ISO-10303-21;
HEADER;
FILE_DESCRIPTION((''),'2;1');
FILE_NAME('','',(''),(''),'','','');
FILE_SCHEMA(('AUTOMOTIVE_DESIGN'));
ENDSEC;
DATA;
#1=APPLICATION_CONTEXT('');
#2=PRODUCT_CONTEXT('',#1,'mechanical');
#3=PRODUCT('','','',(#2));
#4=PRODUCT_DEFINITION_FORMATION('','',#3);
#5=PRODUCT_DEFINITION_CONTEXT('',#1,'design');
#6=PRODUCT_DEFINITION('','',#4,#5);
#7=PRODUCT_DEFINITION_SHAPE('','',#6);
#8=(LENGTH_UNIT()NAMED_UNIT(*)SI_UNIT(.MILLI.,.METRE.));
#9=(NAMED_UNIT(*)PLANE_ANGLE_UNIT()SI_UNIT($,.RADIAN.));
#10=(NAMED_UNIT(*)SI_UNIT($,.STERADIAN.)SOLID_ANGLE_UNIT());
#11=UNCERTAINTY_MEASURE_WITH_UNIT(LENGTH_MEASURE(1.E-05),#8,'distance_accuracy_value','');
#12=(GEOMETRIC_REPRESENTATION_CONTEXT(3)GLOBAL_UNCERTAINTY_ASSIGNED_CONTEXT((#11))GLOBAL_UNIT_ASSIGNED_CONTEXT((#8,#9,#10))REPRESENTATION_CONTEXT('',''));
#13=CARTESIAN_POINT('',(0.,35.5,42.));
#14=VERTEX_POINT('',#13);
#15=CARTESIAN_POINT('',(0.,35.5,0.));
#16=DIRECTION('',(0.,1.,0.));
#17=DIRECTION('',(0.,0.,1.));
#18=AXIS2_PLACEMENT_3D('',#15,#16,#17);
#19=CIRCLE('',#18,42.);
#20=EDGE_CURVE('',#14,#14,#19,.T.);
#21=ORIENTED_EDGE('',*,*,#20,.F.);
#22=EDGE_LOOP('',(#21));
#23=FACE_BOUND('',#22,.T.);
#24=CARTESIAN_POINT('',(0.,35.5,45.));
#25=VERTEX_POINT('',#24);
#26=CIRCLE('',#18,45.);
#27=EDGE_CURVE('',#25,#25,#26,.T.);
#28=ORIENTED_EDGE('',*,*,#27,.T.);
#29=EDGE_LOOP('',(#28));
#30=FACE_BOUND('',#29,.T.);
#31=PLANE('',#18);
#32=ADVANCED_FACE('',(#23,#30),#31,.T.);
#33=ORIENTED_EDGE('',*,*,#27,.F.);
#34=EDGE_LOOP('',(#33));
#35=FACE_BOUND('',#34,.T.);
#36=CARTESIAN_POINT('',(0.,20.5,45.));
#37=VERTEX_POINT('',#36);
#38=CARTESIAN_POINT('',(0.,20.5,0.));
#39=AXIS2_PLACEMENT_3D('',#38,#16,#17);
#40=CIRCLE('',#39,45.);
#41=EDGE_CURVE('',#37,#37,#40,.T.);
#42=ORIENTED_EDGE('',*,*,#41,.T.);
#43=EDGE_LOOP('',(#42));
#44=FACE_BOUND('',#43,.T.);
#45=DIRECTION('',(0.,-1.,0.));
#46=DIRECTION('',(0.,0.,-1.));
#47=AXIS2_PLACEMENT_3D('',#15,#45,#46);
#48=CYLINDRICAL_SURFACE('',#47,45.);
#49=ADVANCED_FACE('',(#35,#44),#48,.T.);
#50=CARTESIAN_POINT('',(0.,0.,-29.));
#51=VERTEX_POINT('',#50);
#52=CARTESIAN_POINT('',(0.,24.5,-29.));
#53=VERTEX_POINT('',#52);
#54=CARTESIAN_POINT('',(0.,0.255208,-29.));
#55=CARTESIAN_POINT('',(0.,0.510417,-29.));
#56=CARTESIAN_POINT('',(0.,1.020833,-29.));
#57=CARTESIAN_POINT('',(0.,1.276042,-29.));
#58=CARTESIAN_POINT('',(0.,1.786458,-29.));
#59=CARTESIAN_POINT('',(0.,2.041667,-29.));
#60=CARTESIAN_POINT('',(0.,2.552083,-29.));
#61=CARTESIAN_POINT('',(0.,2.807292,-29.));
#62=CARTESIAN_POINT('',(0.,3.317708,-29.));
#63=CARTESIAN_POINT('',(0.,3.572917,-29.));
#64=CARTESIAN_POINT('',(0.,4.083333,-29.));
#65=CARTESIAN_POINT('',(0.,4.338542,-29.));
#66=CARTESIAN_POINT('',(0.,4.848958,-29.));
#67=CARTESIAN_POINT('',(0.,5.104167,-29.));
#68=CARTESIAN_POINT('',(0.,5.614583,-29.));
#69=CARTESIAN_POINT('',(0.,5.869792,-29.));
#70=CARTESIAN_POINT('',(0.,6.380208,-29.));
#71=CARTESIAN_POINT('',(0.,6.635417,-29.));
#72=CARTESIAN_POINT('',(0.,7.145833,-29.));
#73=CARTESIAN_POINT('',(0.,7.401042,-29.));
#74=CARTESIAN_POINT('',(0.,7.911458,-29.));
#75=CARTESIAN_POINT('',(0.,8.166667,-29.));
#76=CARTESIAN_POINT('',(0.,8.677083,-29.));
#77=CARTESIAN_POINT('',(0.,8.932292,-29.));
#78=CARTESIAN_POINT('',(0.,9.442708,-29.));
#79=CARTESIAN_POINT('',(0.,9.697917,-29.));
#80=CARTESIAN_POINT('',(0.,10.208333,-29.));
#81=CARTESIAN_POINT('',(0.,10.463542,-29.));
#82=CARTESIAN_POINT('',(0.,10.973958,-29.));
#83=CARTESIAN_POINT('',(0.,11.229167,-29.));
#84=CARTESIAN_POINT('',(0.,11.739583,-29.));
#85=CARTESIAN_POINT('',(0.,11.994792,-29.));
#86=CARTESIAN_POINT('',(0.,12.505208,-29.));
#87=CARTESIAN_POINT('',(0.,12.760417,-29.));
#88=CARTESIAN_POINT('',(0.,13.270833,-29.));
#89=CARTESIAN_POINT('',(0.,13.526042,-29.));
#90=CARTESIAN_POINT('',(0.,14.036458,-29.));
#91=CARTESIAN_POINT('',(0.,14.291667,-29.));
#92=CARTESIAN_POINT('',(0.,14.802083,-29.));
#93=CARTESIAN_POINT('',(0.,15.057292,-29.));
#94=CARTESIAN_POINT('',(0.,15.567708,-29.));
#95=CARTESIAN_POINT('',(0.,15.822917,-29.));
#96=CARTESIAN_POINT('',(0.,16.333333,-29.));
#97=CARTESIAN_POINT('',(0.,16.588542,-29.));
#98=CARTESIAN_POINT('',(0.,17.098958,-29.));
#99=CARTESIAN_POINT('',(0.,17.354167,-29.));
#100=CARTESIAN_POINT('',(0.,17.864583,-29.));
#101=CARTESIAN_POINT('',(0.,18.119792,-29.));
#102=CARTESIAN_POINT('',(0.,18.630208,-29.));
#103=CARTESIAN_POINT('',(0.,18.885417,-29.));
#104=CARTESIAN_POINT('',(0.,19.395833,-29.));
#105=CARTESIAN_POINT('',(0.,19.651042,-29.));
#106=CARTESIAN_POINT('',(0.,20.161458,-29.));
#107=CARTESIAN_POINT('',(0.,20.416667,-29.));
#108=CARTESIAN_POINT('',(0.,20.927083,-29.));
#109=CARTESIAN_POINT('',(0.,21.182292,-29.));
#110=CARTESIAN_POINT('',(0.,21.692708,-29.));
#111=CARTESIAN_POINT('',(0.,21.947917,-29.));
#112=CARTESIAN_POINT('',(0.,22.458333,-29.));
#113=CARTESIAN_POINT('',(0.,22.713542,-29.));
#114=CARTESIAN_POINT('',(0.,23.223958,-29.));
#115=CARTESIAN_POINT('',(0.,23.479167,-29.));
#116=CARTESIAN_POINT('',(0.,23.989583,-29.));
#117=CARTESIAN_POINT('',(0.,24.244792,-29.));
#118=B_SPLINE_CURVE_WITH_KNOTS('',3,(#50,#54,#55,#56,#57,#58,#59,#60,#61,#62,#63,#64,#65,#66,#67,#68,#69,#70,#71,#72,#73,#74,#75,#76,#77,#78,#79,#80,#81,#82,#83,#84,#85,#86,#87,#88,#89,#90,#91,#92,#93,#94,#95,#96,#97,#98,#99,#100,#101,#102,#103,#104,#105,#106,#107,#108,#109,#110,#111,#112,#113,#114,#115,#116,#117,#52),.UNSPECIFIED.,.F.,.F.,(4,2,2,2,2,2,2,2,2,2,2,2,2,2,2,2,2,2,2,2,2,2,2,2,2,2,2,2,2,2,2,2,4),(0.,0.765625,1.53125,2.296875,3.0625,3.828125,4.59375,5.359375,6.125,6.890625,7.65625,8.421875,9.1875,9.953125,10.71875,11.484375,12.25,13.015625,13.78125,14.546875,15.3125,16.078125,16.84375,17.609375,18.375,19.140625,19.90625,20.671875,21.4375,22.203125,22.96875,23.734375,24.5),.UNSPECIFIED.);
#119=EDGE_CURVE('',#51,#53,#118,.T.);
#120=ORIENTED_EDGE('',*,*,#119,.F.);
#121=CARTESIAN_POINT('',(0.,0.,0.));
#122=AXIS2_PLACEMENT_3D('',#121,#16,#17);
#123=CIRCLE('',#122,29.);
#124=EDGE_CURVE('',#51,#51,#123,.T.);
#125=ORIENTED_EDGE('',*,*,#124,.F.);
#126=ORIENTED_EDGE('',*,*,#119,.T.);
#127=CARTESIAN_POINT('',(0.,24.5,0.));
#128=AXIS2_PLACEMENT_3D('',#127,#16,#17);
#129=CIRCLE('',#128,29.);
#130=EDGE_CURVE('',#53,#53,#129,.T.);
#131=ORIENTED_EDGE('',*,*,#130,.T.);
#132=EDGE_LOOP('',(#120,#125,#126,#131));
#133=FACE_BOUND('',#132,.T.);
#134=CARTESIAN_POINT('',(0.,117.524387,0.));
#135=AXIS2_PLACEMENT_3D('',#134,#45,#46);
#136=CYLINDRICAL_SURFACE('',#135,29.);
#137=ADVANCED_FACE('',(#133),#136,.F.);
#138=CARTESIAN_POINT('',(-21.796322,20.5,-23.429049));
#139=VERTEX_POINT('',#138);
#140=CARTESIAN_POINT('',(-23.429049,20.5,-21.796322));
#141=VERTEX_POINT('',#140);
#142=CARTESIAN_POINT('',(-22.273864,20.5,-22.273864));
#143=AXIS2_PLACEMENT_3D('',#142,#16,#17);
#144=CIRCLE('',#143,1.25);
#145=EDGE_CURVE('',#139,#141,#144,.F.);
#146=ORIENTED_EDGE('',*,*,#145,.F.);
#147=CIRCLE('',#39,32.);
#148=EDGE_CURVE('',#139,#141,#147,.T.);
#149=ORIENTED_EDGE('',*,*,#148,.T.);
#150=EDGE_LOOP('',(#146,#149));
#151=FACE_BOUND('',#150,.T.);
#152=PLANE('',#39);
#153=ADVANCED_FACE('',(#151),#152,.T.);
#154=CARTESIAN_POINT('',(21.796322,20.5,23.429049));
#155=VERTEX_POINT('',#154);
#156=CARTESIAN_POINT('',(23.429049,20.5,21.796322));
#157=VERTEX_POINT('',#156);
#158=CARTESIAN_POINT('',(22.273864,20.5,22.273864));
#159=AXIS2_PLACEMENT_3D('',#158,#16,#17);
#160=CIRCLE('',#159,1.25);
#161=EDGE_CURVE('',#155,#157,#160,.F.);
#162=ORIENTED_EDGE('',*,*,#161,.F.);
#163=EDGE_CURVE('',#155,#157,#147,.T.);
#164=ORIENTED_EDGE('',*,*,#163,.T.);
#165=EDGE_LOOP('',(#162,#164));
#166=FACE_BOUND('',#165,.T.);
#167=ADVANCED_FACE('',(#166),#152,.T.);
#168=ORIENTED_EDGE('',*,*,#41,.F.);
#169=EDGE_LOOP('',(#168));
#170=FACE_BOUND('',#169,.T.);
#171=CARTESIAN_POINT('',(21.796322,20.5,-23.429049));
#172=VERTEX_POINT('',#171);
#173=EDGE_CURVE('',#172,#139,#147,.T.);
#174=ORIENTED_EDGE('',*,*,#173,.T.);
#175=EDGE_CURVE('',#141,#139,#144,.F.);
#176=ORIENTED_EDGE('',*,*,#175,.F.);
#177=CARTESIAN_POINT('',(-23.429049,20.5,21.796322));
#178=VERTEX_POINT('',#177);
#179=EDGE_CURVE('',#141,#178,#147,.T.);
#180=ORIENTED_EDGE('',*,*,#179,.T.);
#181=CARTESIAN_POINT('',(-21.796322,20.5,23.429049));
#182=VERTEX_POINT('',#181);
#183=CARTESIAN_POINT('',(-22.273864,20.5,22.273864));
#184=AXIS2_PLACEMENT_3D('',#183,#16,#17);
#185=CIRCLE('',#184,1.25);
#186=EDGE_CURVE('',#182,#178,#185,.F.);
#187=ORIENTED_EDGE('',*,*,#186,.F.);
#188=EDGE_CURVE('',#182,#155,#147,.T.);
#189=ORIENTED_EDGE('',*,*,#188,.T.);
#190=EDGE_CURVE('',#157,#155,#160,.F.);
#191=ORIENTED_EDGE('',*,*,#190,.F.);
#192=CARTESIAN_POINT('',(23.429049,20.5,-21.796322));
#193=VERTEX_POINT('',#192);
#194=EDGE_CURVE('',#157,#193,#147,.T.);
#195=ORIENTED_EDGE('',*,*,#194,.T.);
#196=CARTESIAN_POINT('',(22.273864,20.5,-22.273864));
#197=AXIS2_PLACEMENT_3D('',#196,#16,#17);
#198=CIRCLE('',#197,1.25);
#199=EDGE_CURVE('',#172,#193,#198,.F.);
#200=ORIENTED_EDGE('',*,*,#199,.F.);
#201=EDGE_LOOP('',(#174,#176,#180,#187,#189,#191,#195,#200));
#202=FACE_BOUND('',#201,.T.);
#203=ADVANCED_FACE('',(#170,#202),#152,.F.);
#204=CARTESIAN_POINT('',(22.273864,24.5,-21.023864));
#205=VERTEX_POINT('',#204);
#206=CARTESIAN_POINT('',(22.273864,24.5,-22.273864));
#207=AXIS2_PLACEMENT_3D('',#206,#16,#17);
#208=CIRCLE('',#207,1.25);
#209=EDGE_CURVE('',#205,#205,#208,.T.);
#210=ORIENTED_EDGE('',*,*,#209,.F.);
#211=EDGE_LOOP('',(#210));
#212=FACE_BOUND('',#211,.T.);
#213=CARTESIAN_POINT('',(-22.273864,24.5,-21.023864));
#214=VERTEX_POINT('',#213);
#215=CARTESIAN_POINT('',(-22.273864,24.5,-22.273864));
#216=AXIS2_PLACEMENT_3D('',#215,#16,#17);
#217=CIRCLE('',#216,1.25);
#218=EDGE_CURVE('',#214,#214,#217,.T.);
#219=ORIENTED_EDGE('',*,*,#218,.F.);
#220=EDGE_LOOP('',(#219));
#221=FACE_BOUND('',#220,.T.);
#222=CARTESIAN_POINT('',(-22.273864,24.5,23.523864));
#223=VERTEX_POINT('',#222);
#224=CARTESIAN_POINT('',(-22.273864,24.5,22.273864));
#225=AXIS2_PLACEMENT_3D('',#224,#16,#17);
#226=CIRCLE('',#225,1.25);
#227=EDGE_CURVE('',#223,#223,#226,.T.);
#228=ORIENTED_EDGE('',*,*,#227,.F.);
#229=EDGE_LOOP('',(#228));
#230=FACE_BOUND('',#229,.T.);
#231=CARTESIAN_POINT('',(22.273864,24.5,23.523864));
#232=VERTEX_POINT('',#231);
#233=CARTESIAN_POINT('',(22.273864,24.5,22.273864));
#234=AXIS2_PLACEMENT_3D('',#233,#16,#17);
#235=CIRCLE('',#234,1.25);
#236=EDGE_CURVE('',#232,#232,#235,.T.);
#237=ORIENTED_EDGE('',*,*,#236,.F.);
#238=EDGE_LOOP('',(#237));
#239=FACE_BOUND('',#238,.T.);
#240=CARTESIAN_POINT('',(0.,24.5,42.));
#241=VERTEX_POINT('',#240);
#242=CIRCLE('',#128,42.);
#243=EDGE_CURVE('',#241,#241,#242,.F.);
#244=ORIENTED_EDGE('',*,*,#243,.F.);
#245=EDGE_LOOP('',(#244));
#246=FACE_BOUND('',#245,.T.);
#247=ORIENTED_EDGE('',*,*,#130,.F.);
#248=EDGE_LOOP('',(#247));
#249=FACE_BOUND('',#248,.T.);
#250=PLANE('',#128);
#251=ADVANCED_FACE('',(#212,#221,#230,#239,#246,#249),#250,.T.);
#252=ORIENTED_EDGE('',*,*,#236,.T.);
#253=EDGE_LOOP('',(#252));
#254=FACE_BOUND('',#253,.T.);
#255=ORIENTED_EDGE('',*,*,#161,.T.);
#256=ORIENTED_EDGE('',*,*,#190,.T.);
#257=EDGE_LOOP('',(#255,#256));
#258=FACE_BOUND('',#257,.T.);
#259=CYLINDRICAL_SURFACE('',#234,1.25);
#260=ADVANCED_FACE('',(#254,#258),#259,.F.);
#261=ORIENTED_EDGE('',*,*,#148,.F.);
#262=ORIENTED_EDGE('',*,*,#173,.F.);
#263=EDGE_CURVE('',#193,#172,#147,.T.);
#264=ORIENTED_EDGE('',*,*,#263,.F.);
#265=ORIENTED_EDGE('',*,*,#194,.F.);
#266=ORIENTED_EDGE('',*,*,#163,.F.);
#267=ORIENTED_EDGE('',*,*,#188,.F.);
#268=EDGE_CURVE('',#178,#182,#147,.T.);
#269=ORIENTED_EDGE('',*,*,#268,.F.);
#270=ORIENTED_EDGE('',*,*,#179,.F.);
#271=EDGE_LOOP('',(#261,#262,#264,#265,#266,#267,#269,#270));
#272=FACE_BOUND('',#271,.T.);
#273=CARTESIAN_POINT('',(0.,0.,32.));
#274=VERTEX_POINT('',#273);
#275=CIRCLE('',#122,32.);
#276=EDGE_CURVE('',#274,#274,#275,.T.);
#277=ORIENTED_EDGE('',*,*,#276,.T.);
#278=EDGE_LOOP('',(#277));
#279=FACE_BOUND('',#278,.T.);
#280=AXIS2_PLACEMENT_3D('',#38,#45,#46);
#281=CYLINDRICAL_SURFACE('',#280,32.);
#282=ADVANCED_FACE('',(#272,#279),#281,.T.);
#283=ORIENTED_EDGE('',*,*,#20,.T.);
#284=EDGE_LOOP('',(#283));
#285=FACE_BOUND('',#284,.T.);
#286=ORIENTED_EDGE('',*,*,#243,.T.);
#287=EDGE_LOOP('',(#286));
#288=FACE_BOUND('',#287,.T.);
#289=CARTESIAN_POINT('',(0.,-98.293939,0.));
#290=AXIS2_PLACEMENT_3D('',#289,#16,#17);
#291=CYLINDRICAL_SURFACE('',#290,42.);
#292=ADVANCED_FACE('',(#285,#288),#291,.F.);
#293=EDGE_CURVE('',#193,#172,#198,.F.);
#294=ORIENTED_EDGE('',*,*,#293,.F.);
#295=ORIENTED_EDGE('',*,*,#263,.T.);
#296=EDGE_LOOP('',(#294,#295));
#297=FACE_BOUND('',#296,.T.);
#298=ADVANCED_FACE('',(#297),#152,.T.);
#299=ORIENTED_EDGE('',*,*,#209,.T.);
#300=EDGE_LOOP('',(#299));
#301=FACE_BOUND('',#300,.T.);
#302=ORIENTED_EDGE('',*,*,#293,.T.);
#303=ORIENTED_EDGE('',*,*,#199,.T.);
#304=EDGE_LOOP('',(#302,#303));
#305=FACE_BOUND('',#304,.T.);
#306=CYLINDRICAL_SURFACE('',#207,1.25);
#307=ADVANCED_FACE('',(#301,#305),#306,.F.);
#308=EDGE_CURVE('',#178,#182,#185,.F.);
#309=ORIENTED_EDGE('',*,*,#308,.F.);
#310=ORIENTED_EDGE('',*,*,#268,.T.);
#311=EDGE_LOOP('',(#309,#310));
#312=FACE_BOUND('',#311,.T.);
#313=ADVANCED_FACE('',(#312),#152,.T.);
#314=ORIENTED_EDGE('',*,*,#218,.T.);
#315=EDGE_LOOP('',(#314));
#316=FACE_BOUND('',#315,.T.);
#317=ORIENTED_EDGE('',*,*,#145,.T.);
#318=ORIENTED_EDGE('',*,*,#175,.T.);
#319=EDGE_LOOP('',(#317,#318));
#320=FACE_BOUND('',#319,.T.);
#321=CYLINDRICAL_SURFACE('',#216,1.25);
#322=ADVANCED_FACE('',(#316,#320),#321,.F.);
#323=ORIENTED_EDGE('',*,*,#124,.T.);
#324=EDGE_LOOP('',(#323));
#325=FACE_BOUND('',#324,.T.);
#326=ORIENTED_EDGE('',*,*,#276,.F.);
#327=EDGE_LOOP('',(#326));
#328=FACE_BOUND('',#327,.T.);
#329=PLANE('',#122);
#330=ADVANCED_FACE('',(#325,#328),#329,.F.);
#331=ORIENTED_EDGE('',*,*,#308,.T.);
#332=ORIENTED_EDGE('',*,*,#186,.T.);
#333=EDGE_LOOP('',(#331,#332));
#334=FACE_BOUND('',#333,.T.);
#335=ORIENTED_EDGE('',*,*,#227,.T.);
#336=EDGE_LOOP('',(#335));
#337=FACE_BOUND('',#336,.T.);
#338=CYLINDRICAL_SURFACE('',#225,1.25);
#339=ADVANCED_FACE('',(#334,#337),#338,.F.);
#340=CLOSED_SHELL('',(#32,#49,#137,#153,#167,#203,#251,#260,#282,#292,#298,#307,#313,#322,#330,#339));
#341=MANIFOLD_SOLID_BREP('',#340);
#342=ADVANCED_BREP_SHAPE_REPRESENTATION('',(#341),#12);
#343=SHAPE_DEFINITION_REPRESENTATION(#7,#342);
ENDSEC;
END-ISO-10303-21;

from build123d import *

# Parameters (mm, degrees)
SKETCH_1_R                 = 32
EXTRUDE_1_DEPTH            = 20.5
SKETCH_12_R                = 45
EXTRUDE_2_DEPTH            = 15
SKETCH_11_R                = 29
CUT_EXTRUDE_6_DEPTH        = 35.5
SKETCH_13_R                = 42
CUT_EXTRUDE_7_DEPTH        = 11
HOLE_START                 = 20.5
HOLE_WIZARD_M3_1_OUTLINE_R = 1.25
HOLE_WIZARD_M3_1_DEPTH     = 4


# Read off the part's stored shape, not the designer's step: M3 螺纹孔1
with BuildPart() as part:
    # 草图1 → 凸台-拉伸1 (new body)
    with BuildSketch(Plane(origin=(0, 0, 0), x_dir=(1, 0, 0), z_dir=(0, 1, 0))):
        with Locations(Location((0, 0, 0), (0, 0, 270))):
            Circle(SKETCH_1_R)
    extrude(amount=EXTRUDE_1_DEPTH)

    # 草图12 → 凸台-拉伸2 (add)
    with BuildSketch(Plane(origin=(0, 20.5, 0), x_dir=(1, 0, 0), z_dir=(0, 1, 0))):
        with Locations(Location((0, 0, 0), (0, 0, 270))):
            Circle(SKETCH_12_R)
    extrude(amount=EXTRUDE_2_DEPTH)

    # 草图11 → 切除-拉伸6 (cut)
    with BuildSketch(Plane(origin=(0, 0, 0), x_dir=(1, 0, 0), z_dir=(0, 1, 0))):
        with Locations(Location((0, 0, 0), (0, 0, 90))):
            Circle(SKETCH_11_R)
    extrude(amount=CUT_EXTRUDE_6_DEPTH, mode=Mode.SUBTRACT)

    # 草图13 → 切除-拉伸7 (cut)
    with BuildSketch(Plane(origin=(0, 35.5, 0), x_dir=(1, 0, 0), z_dir=(0, 1, 0))):
        with Locations(Location((0, 0, 0), (0, 0, 270))):
            Circle(SKETCH_13_R)
    extrude(amount=-CUT_EXTRUDE_7_DEPTH, mode=Mode.SUBTRACT)

    # M3 螺纹孔1 outline → M3 螺纹孔1 (cut)
    with BuildSketch(Plane(origin=(0, 0, 0), x_dir=(1, 0, 0), z_dir=(0, 1, 0)).offset(HOLE_START)):
        with Locations((-22.273863607, -22.273863607)):
            Circle(HOLE_WIZARD_M3_1_OUTLINE_R)
        with Locations((22.273863607, -22.273863607)):
            Circle(HOLE_WIZARD_M3_1_OUTLINE_R)
        with Locations((22.273863607, 22.273863607)):
            Circle(HOLE_WIZARD_M3_1_OUTLINE_R)
        with Locations((-22.273863607, 22.273863607)):
            Circle(HOLE_WIZARD_M3_1_OUTLINE_R)
    extrude(amount=HOLE_WIZARD_M3_1_DEPTH, mode=Mode.SUBTRACT)


solid = part.part
